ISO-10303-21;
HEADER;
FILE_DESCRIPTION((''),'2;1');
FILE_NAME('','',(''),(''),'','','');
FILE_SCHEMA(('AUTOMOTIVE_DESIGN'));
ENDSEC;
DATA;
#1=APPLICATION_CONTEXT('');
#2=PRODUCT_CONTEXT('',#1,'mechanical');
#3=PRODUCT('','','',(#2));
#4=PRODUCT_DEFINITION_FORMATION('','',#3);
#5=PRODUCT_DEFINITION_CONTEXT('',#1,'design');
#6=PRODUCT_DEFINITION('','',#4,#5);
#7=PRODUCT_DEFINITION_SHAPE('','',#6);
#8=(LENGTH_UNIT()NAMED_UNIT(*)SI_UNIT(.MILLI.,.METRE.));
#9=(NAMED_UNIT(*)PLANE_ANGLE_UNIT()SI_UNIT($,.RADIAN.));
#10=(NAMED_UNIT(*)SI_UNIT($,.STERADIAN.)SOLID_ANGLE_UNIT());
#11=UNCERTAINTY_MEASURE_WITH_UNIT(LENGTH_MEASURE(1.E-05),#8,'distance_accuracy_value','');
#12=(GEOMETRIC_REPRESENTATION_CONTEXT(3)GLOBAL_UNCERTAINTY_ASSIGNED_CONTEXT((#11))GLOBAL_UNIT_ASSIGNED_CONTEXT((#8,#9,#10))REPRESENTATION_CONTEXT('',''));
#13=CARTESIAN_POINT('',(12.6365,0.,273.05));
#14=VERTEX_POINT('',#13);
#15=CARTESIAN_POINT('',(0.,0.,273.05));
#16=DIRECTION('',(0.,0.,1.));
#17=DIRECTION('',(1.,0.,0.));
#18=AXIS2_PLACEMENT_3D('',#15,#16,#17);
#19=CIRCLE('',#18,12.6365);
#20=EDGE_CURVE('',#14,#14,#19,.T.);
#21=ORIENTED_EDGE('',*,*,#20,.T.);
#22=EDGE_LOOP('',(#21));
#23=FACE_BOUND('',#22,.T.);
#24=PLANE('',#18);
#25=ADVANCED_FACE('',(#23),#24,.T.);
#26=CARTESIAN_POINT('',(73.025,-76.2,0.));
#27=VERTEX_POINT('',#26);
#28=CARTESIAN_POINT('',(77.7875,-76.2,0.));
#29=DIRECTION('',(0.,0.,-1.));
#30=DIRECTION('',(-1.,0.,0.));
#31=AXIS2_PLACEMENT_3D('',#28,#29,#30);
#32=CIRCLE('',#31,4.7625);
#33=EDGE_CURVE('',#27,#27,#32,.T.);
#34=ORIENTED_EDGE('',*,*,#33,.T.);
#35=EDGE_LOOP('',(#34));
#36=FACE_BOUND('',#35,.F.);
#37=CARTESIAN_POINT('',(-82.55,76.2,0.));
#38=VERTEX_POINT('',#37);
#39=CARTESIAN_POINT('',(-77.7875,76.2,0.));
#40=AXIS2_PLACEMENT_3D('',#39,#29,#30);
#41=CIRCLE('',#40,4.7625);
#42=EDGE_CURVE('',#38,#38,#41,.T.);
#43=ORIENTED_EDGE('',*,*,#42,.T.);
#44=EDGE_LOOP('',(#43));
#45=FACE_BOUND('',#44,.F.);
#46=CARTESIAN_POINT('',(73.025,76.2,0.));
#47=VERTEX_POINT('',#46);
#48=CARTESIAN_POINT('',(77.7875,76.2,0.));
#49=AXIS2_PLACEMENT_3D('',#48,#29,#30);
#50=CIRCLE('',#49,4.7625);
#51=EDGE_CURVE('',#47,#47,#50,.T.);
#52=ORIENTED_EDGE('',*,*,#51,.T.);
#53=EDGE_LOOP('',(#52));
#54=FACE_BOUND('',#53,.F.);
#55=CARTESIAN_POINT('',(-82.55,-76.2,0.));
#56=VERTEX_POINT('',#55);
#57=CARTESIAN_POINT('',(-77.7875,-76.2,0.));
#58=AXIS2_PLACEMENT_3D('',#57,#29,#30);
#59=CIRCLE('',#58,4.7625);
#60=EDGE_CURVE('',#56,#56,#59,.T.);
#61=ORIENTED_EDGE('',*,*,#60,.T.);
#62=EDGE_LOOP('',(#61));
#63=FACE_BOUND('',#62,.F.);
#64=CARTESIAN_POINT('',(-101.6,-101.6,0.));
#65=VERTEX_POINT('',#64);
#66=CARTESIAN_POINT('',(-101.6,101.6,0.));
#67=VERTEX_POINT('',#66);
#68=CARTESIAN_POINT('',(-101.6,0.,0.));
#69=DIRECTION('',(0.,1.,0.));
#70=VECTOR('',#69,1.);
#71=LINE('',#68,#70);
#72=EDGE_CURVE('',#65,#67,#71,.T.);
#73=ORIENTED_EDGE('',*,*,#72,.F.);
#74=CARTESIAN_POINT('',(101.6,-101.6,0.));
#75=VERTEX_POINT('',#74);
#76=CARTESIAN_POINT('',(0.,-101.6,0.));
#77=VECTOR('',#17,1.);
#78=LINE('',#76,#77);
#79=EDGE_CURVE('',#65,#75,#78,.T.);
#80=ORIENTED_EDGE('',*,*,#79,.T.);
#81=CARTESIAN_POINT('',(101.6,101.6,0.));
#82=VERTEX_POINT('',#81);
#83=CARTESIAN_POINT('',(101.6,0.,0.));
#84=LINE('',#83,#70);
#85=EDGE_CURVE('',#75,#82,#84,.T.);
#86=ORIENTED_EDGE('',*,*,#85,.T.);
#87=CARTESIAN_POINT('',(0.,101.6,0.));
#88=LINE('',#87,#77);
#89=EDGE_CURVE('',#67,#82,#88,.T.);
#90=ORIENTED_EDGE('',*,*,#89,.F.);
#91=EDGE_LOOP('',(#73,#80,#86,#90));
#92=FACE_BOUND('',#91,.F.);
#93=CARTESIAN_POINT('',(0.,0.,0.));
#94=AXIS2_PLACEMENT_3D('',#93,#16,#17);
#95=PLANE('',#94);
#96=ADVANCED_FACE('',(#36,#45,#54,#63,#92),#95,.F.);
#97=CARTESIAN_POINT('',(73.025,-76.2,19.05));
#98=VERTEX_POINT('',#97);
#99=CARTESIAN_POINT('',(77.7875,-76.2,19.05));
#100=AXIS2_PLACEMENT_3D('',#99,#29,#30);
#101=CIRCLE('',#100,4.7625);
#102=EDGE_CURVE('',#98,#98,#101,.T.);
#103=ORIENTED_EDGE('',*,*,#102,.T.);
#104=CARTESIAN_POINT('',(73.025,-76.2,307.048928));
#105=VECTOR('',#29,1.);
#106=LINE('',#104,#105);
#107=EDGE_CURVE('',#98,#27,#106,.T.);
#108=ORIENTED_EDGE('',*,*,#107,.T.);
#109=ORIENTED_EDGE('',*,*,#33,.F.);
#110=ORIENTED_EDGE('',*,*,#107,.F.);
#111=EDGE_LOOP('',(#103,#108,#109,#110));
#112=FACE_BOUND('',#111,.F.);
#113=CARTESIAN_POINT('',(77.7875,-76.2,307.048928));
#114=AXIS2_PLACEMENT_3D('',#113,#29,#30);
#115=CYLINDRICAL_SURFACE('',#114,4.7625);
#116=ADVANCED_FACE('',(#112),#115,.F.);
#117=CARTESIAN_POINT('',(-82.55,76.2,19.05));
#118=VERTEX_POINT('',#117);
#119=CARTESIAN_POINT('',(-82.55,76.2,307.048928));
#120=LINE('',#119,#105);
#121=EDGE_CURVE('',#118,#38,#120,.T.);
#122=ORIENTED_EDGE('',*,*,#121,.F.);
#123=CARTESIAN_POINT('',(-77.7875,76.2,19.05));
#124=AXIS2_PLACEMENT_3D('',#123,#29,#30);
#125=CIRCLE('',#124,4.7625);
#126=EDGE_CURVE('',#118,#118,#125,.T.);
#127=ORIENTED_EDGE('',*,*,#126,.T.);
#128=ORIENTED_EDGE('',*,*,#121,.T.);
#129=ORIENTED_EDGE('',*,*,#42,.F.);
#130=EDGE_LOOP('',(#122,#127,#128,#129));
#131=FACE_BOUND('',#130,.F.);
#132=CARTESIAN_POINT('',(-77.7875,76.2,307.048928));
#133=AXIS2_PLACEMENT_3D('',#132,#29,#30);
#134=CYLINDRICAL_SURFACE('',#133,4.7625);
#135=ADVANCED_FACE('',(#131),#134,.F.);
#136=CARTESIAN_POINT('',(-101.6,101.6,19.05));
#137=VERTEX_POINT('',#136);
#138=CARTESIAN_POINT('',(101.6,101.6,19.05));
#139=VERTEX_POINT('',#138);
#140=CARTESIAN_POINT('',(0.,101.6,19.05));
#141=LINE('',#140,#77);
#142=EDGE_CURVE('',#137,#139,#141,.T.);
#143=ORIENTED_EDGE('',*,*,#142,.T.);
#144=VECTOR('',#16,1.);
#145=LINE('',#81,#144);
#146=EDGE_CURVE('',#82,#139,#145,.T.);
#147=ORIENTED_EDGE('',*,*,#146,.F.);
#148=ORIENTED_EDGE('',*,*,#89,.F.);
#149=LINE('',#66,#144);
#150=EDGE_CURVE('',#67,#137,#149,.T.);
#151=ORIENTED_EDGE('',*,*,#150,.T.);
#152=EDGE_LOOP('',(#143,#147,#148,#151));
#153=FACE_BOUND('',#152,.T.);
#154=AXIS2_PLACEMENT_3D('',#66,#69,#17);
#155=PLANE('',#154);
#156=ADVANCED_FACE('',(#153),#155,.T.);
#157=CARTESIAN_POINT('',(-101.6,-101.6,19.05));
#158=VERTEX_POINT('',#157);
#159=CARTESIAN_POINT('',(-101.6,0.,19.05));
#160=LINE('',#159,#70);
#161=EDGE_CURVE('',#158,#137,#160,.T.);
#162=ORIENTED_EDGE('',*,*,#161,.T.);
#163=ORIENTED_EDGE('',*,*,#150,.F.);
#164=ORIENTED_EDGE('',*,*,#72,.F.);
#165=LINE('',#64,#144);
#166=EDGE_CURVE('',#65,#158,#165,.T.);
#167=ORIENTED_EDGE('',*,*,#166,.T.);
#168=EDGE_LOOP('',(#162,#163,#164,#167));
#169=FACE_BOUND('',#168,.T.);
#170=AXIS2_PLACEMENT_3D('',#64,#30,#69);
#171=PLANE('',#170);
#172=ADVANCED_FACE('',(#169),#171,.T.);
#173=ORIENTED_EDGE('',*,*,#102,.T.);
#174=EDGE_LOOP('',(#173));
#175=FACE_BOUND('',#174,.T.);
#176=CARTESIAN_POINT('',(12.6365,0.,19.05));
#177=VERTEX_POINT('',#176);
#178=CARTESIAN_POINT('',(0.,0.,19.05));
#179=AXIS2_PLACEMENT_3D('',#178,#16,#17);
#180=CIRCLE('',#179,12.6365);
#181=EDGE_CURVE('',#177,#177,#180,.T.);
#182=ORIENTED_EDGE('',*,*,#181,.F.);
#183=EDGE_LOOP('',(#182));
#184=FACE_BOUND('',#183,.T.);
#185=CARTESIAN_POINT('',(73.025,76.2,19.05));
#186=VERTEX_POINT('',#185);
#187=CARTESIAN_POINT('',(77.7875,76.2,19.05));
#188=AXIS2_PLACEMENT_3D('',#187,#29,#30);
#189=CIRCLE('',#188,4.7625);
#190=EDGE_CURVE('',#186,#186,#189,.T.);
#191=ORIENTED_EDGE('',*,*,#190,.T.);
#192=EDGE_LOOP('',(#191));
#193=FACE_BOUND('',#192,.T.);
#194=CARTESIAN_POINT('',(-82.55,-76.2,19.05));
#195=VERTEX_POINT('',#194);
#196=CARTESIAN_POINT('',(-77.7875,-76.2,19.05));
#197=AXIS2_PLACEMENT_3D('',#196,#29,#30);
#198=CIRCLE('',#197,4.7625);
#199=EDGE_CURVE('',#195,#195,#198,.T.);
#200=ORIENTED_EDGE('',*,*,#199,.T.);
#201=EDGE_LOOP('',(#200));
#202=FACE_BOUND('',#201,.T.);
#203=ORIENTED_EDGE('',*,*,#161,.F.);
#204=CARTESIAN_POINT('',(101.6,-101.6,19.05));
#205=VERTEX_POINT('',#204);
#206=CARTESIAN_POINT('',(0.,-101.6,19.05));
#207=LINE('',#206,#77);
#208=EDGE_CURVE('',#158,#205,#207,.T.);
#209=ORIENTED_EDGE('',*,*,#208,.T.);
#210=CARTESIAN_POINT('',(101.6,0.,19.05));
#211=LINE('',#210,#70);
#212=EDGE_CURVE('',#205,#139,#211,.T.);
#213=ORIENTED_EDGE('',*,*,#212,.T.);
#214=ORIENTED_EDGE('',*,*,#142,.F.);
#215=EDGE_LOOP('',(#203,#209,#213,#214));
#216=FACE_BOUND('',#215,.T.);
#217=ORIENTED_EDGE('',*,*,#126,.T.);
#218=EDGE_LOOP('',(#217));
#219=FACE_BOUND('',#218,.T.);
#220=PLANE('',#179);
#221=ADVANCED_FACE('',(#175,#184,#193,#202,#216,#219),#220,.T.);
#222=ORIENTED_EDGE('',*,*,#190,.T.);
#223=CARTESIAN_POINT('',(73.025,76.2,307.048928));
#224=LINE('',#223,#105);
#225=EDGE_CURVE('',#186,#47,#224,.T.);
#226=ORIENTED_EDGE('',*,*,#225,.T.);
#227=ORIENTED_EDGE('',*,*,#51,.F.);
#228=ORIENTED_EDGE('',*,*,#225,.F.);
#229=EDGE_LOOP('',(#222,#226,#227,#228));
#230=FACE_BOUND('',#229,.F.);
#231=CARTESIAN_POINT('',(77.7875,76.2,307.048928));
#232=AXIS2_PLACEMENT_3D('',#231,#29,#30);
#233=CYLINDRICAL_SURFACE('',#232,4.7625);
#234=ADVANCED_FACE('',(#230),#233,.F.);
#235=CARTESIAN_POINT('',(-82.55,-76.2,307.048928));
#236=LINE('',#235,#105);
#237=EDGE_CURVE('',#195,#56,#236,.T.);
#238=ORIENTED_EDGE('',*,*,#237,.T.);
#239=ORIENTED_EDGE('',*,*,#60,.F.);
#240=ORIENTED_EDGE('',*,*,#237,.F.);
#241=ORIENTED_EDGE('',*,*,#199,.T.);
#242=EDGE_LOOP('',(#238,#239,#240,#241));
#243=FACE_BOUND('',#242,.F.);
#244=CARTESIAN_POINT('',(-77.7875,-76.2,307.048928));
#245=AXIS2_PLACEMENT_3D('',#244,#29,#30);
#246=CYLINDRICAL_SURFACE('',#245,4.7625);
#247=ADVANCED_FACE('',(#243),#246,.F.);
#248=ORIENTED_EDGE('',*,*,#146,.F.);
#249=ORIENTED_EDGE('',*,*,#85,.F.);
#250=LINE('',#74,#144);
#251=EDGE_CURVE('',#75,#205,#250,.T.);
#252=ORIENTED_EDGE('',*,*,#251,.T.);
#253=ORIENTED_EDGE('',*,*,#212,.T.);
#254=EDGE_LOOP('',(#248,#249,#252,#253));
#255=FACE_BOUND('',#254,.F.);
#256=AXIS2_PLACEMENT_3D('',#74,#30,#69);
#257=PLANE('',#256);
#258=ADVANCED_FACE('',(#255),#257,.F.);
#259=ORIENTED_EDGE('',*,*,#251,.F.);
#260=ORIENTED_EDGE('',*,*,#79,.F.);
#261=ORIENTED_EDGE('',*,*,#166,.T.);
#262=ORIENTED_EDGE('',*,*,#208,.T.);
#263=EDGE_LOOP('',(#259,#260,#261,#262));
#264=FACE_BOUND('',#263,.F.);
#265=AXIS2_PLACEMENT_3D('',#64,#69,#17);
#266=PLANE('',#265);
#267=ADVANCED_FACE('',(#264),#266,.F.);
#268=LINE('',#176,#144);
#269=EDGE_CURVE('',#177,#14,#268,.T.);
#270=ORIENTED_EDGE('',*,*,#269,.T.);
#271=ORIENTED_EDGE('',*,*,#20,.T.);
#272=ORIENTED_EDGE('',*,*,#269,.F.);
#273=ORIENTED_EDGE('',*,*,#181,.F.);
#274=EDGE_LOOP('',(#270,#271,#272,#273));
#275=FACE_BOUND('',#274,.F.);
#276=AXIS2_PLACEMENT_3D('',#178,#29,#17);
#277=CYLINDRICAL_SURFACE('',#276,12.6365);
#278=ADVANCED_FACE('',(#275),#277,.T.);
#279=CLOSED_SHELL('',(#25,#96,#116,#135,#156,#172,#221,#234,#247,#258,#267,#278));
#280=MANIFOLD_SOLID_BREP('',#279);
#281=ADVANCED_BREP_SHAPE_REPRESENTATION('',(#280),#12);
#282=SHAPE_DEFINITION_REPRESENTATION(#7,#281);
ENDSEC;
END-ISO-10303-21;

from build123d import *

# Parameters (mm, degrees)
F0_W     = 203.2
F0_H     = 203.2
F1_DEPTH = 19.05
F3_D     = 9.525
F4_R     = 12.6365
F5_DEPTH = 254


# Not quite as in the source:
# - a length typed as a fraction of an inch, garbled in the dataset ("3 / 203.2 mm" for 3/8 in), is restored


with BuildPart() as f1:
    # F0 (on Top) → F1 (new body)
    with BuildSketch(Plane.XY):
        Rectangle(F0_W, F0_H)
    extrude(amount=F1_DEPTH)

    # F3 (through all)
    with Locations(Plane.XY.offset(19.05)):
        with Locations((-77.7875, 76.2), (77.7875, 76.2), (-77.7875, -76.2), (77.7875, -76.2)):
            Hole(F3_D / 2)

    # F4 (on face) → F5 (join)
    with BuildSketch(Plane.XY.offset(19.05)):
        Circle(F4_R)
    extrude(amount=F5_DEPTH)


solid = f1.part
